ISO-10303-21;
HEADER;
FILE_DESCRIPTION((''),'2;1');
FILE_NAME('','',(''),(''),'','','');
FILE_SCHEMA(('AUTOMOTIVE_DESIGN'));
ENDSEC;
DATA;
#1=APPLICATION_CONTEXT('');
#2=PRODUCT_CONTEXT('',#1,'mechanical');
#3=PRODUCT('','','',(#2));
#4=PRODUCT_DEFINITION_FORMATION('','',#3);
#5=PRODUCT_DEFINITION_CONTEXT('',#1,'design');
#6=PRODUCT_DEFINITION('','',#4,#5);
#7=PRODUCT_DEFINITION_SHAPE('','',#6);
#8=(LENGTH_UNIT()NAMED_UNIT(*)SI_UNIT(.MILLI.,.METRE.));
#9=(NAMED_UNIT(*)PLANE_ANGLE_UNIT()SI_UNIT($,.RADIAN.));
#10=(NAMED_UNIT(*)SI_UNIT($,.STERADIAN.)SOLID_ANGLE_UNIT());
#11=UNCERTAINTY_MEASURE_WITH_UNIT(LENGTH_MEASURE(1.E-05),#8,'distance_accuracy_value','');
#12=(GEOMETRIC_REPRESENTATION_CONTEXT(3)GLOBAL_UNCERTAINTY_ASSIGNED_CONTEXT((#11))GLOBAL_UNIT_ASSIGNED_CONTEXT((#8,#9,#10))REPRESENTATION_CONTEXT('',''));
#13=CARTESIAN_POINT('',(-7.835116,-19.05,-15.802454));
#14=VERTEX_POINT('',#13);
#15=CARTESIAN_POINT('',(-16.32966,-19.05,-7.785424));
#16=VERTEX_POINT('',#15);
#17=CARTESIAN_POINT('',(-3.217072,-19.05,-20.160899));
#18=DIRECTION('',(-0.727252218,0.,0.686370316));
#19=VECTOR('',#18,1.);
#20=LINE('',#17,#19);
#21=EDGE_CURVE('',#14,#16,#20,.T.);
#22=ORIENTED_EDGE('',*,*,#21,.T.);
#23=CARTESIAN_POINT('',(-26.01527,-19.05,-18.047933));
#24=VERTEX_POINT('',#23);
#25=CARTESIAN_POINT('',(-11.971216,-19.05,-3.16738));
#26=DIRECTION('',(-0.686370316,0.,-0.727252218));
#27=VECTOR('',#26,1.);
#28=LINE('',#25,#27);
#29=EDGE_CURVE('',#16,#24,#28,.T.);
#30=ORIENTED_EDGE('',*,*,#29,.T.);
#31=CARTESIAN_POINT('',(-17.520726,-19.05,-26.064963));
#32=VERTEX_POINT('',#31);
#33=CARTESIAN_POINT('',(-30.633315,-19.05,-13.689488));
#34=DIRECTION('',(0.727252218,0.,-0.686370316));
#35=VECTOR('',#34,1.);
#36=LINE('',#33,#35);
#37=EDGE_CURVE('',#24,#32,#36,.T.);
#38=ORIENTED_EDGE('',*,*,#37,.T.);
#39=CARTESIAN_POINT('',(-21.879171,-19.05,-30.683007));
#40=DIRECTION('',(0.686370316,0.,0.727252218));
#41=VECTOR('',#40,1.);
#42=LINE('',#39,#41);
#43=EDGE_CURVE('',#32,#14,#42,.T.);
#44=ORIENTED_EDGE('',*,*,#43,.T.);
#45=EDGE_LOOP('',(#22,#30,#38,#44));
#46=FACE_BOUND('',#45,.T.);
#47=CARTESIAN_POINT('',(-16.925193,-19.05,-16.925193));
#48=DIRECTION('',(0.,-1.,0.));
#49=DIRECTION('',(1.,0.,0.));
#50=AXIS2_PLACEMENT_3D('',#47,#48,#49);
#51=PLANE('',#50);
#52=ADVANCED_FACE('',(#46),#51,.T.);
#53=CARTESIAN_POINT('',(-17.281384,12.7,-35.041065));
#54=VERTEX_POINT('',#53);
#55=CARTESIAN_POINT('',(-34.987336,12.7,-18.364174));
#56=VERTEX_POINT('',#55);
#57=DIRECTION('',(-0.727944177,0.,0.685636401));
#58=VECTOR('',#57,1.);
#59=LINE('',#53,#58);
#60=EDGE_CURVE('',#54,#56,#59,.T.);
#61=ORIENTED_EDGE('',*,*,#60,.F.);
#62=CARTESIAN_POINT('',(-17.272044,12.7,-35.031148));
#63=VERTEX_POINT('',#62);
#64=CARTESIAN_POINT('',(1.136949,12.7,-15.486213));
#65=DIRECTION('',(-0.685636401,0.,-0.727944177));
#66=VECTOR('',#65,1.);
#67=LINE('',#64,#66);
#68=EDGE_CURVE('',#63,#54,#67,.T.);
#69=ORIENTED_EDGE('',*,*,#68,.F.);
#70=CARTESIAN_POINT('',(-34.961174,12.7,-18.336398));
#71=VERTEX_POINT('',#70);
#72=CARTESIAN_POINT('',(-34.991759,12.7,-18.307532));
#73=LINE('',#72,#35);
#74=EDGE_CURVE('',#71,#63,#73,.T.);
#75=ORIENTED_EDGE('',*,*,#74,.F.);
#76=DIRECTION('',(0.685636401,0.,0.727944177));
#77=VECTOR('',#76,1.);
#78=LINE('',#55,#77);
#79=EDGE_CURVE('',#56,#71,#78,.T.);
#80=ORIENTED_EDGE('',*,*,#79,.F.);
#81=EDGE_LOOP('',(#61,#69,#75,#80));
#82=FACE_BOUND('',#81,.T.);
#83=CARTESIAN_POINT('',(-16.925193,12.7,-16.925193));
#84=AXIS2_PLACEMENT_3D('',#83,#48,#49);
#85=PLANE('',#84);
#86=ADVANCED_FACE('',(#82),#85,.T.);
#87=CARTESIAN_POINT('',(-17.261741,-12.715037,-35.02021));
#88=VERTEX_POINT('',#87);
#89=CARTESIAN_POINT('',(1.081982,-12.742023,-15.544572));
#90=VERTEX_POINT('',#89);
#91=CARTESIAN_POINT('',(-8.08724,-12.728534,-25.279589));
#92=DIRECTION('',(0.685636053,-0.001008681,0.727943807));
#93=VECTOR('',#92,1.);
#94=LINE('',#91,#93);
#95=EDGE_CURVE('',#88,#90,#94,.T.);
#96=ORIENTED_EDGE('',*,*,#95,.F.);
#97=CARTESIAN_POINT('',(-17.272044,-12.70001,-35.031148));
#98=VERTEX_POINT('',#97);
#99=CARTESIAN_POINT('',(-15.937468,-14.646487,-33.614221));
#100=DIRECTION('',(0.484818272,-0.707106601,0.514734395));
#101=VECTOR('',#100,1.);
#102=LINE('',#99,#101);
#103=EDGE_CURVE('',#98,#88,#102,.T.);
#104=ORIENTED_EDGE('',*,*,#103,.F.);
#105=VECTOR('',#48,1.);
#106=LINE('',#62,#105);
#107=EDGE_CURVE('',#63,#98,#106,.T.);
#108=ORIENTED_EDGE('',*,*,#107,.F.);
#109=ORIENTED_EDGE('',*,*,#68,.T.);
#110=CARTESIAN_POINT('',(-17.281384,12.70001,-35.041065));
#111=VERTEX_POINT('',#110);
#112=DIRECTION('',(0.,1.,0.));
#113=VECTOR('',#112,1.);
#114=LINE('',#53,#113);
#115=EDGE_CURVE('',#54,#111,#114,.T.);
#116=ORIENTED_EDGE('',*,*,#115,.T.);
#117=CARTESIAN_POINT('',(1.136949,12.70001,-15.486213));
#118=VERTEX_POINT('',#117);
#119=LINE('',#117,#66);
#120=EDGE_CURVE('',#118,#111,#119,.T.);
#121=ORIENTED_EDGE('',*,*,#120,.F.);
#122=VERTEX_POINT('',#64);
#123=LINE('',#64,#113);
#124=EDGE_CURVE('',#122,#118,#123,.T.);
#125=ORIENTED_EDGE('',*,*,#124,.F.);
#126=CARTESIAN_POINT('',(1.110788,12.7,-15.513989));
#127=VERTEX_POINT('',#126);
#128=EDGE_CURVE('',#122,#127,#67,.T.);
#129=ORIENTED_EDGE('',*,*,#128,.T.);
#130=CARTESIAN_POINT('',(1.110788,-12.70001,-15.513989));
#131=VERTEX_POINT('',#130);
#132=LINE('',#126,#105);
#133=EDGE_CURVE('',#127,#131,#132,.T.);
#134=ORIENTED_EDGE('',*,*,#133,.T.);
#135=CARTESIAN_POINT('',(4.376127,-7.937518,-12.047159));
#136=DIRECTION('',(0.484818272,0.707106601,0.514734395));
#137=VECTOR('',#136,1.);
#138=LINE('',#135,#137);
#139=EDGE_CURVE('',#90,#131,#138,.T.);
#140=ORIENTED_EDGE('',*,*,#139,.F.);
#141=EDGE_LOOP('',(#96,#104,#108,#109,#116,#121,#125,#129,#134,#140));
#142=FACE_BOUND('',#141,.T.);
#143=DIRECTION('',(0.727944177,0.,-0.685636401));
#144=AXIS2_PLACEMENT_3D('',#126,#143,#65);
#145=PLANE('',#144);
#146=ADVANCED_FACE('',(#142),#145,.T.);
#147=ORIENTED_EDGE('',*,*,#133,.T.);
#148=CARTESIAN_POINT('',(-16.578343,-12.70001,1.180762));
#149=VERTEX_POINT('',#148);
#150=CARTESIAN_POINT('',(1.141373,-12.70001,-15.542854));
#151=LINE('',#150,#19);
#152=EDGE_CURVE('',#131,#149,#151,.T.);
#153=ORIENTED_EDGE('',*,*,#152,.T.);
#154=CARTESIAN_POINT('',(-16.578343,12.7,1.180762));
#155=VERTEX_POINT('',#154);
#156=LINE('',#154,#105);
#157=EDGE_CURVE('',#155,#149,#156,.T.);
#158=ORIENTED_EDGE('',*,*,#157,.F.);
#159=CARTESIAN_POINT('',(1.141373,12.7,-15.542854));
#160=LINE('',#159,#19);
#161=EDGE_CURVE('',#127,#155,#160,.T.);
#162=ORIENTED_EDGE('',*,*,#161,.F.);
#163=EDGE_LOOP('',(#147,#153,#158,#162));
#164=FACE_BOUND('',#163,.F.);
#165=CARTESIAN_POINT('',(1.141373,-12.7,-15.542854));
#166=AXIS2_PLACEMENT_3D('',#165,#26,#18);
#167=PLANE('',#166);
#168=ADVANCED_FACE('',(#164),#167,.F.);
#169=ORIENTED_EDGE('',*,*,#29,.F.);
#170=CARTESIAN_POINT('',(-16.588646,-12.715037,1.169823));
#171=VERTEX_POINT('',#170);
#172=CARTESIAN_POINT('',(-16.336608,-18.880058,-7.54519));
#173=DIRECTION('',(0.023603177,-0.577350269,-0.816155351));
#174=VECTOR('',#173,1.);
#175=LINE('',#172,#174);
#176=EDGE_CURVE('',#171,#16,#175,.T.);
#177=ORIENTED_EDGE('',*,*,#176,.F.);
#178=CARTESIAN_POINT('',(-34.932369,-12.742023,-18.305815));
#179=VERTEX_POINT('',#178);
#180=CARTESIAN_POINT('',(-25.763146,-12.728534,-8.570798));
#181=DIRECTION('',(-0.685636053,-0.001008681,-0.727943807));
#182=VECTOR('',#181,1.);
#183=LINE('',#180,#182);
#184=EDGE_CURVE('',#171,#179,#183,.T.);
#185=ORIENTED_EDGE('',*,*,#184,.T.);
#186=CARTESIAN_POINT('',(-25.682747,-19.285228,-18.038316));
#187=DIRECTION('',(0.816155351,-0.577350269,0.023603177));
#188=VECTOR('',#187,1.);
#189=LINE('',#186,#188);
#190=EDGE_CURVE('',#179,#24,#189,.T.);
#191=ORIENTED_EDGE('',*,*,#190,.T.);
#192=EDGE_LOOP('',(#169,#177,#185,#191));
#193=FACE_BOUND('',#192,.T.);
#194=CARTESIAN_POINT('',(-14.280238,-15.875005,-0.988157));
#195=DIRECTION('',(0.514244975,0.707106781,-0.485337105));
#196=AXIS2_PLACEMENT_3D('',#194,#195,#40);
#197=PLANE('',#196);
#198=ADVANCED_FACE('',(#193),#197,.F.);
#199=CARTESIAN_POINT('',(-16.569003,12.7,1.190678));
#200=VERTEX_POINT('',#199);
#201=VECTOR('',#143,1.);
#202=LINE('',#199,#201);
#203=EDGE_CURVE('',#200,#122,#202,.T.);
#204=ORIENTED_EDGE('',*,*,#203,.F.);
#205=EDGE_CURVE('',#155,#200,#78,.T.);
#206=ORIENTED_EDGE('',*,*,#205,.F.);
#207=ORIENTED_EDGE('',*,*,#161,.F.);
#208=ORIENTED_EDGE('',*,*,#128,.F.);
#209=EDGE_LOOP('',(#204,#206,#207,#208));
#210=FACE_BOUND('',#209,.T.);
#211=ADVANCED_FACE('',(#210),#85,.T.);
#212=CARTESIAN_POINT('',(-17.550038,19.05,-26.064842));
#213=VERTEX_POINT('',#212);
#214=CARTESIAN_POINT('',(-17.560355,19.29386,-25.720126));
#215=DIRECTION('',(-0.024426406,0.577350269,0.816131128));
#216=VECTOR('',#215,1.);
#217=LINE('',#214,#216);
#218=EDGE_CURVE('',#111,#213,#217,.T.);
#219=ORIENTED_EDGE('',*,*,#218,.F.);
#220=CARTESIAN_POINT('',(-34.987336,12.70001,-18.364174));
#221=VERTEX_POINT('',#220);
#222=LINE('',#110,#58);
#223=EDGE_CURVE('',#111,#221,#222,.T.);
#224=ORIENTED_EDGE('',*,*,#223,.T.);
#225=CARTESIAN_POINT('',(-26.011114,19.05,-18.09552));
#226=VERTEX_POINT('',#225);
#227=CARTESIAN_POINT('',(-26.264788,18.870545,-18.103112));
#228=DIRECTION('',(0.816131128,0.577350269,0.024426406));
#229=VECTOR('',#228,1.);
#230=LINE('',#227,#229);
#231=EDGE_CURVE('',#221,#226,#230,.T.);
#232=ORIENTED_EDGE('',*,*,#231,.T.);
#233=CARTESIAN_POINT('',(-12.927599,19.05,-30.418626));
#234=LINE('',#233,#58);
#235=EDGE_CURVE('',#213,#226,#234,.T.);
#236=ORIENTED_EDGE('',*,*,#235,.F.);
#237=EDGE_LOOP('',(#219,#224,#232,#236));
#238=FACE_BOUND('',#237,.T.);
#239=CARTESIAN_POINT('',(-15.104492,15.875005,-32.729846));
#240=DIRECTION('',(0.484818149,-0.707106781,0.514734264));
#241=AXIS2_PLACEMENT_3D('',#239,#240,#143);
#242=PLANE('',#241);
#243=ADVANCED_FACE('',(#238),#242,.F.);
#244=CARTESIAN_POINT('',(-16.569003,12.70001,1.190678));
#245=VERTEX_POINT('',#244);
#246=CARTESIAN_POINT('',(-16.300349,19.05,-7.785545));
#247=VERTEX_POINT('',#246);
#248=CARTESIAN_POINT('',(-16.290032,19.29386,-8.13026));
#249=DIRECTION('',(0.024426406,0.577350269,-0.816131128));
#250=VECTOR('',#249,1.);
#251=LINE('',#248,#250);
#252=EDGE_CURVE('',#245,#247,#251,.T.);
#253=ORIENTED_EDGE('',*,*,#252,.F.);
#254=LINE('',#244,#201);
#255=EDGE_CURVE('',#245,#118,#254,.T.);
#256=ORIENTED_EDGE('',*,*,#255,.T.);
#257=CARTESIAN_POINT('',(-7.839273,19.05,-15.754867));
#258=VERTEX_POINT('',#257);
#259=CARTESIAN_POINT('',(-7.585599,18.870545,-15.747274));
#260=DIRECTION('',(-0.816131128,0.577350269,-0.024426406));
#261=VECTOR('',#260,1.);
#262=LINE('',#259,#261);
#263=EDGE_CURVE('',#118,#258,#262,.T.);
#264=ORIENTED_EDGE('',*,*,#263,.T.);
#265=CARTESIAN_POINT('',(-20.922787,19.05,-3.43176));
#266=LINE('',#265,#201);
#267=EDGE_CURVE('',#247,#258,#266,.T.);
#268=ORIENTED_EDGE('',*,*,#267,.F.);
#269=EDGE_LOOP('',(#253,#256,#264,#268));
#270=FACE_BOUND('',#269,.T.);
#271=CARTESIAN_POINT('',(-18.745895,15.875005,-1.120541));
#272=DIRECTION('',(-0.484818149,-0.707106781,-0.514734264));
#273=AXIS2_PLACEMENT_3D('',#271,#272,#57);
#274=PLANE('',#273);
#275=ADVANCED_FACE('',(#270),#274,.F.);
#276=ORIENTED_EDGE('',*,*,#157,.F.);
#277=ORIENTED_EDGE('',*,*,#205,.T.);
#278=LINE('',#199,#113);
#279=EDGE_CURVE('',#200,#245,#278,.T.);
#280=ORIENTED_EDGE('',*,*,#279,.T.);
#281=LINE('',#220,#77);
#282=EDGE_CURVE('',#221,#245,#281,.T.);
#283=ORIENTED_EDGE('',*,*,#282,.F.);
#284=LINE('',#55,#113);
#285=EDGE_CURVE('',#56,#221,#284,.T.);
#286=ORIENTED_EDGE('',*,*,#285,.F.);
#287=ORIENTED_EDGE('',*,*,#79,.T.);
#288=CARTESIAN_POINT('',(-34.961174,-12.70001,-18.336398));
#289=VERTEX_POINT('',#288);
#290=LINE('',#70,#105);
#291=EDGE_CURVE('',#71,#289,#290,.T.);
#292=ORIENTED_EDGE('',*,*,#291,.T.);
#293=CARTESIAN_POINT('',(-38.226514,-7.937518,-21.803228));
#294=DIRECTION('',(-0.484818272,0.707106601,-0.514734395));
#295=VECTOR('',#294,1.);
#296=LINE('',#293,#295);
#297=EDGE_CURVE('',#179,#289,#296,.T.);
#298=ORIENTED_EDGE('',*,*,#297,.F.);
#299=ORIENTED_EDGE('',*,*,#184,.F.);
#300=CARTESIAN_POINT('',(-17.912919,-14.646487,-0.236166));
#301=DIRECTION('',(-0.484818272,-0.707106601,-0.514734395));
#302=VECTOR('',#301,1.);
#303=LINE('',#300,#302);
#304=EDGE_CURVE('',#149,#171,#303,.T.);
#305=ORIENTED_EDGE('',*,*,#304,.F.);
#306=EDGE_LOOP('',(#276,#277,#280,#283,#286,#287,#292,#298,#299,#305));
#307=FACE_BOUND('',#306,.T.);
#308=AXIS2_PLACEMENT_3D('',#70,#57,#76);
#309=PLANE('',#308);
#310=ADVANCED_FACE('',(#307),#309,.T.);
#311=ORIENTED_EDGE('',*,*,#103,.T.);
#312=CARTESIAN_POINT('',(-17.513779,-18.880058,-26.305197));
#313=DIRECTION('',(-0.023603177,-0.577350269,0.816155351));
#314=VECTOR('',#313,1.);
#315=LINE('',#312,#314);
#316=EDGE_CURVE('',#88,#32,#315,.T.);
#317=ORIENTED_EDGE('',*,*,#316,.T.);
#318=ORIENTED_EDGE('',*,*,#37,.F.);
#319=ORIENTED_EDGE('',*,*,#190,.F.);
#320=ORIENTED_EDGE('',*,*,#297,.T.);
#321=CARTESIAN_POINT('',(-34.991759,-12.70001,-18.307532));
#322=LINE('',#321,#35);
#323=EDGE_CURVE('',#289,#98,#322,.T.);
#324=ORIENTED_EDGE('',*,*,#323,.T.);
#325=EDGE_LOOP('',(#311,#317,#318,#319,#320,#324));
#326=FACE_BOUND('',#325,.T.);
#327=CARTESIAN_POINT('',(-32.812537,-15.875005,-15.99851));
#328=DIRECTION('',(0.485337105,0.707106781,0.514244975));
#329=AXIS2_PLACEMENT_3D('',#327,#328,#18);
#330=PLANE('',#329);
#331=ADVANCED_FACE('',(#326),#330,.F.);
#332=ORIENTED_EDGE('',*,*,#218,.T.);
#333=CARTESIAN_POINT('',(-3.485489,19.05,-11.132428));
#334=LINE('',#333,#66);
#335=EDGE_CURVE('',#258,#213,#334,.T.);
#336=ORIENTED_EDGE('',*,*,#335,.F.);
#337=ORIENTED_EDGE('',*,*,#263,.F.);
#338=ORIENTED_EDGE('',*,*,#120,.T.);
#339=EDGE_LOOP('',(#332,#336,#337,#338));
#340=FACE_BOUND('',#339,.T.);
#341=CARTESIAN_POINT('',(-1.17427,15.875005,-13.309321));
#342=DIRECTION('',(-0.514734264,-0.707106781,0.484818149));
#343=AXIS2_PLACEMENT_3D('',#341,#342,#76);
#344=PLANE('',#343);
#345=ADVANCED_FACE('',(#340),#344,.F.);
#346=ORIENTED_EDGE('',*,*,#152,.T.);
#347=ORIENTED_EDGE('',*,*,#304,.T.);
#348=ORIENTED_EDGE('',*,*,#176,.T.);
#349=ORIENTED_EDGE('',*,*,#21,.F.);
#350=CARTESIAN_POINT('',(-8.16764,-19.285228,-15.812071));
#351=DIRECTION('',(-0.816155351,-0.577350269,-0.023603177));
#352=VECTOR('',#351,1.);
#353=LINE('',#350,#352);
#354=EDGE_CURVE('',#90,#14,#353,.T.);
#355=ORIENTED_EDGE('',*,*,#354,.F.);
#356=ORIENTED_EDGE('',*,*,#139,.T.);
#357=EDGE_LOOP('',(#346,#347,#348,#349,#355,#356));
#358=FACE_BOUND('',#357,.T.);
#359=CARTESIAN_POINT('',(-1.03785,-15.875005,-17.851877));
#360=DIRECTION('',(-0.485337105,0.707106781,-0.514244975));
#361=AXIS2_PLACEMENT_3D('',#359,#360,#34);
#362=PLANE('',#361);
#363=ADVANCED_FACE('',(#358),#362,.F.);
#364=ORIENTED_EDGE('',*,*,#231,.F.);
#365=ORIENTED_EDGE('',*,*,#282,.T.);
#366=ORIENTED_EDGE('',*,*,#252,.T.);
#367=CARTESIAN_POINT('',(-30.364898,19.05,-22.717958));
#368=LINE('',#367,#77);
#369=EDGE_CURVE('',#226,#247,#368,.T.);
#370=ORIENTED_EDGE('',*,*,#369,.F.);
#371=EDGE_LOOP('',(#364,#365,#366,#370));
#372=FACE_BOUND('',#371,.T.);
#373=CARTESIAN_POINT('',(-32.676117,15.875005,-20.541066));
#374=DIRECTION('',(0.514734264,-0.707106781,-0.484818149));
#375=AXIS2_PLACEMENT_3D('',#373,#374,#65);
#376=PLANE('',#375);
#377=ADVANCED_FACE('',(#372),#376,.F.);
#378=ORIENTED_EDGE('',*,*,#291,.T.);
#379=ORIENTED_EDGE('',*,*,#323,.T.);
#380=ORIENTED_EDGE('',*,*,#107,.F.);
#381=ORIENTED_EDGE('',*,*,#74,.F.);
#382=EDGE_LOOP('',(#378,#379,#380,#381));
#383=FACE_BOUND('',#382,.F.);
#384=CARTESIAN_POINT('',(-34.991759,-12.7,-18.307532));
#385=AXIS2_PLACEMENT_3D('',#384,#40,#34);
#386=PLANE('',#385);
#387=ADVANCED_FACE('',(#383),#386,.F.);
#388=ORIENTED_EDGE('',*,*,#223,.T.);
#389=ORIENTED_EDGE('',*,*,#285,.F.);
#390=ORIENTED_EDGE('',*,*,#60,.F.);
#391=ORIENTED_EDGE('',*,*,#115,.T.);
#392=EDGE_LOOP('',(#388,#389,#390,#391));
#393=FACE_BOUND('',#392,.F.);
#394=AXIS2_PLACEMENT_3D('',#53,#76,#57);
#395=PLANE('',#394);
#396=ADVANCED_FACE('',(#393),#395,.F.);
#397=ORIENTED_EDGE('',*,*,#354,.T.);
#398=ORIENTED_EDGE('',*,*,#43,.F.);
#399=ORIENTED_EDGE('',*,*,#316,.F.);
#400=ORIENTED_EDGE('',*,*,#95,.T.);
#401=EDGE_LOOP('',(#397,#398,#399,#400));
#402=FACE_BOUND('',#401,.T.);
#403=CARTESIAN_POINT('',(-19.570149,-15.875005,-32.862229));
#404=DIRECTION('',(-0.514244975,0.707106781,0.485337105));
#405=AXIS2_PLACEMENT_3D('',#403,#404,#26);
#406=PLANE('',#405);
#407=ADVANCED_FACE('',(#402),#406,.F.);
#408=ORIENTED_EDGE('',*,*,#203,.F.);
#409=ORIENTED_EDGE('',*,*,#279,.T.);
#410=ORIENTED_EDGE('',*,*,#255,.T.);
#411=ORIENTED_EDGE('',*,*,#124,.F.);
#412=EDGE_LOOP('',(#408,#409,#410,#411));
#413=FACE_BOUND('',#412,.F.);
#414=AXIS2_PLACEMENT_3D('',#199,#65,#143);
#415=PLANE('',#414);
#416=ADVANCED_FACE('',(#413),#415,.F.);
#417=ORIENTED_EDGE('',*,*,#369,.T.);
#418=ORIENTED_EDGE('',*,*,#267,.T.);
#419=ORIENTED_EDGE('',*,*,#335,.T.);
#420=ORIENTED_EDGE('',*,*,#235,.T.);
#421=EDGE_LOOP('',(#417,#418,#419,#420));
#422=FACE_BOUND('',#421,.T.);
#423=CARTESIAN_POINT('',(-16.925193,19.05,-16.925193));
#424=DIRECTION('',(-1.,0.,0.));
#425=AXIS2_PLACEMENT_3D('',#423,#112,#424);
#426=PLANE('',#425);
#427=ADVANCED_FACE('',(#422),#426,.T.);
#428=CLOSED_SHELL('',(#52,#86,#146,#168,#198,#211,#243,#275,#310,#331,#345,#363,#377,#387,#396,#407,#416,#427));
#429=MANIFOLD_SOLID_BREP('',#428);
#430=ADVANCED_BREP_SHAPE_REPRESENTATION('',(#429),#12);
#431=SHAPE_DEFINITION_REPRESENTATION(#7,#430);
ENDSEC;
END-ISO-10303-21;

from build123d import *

# Parameters (mm, degrees)
F0_R      = 23.1993727041
F1_DEPTH  = 12.7
F2_R      = 23.1993727041
F3_DEPTH  = 12.7
F6_DEPTH  = 6.35
F7_DEPTH  = 6.35
F8_SIZE   = 6.34999
F9_SIZE   = 6.34999
F10_DEPTH = 25.4
F11_DEPTH = 127


# Not quite as in the source:
# - a fillet or chamfer is up to 0.001 mm smaller than in the source, because OpenCascade refuses the exact size


with BuildPart() as f1:
    # F0 (on Front) → F1 (new body)
    with BuildSketch(Plane.XZ):
        with Locations((-16.9251933694, -16.9251933694)):
            Circle(F0_R)
    extrude(amount=F1_DEPTH)

    # F2 (on face) → F3 (join)
    with BuildSketch(Plane(origin=(0, 0, 0), x_dir=(-1, 0, 0), z_dir=(0, 1, 0))):
        with Locations((16.9251933694, -16.9251933694)):
            Circle(F2_R)
    extrude(amount=F3_DEPTH)

    # F4 (on face) → F6 (join)
    with BuildSketch(Plane(origin=(0, 12.7, 0), x_dir=(-1, 0, 0), z_dir=(0, 1, 0))):
        Polygon((34.987336153, -18.3641740003), (16.5690030176, 1.1906780042), (-1.1369494142, -15.4862127385), (17.2813837212, -35.041064743), align=None)
    extrude(amount=F6_DEPTH)

    # F5 (on face) → F7 (join)
    with BuildSketch(Plane.XZ.offset(12.7)):
        Polygon((1.1413726115, -15.5428544637), (-16.5892601531, 1.1910649658), (-34.9917593503, -18.3075322751), (-17.2611265857, -35.0414517045), align=None)
    extrude(amount=F7_DEPTH)

    # F8 (size 6.35 in the source; OpenCascade refuses exactly that, so slightly less here)
    f8_edges = [f1.edges().sort_by_distance(p)[0] for p in [
        (-8.072217, 19.05, -25.263639),
        (-26.13436, 19.05, -26.702619),
        (-25.77817, 19.05, -8.586748),
        (-7.716027, 19.05, -7.147767),
    ]]
    chamfer(f8_edges, length=F8_SIZE)

    # F9 (size 6.35 in the source; OpenCascade refuses exactly that, so slightly less here)
    f9_edges = [f1.edges().sort_by_distance(p)[0] for p in [
        (-8.059877, -19.05, -25.292153),
        (-7.723944, -19.05, -7.175895),
        (-25.79051, -19.05, -8.558234),
        (-26.126443, -19.05, -26.674492),
    ]]
    chamfer(f9_edges, length=F9_SIZE)

    # F10 (cut): faces of the model
    f10_faces = [f1.faces().sort_by_distance(p)[0] for p in [
        (-39.4683887232, -12.7, -16.9251933694),
        (-39.4683887232, -12.7, -16.9251933694),
        (-39.4683887232, -12.7, -16.9251933694),
        (-39.4683887232, -12.7, -16.9251933694),
    ]]
    extrude(f10_faces, amount=-F10_DEPTH, mode=Mode.SUBTRACT)

    # F11 (cut): faces of the model
    f11_faces = [f1.faces().sort_by_distance(p)[0] for p in [
        (-6.6175325, 12.7, -23.7415572289),
        (-27.2328542388, 12.7, -10.1088295099),
    ]]
    extrude(f11_faces, amount=-F11_DEPTH, mode=Mode.SUBTRACT)


solid = f1.part
